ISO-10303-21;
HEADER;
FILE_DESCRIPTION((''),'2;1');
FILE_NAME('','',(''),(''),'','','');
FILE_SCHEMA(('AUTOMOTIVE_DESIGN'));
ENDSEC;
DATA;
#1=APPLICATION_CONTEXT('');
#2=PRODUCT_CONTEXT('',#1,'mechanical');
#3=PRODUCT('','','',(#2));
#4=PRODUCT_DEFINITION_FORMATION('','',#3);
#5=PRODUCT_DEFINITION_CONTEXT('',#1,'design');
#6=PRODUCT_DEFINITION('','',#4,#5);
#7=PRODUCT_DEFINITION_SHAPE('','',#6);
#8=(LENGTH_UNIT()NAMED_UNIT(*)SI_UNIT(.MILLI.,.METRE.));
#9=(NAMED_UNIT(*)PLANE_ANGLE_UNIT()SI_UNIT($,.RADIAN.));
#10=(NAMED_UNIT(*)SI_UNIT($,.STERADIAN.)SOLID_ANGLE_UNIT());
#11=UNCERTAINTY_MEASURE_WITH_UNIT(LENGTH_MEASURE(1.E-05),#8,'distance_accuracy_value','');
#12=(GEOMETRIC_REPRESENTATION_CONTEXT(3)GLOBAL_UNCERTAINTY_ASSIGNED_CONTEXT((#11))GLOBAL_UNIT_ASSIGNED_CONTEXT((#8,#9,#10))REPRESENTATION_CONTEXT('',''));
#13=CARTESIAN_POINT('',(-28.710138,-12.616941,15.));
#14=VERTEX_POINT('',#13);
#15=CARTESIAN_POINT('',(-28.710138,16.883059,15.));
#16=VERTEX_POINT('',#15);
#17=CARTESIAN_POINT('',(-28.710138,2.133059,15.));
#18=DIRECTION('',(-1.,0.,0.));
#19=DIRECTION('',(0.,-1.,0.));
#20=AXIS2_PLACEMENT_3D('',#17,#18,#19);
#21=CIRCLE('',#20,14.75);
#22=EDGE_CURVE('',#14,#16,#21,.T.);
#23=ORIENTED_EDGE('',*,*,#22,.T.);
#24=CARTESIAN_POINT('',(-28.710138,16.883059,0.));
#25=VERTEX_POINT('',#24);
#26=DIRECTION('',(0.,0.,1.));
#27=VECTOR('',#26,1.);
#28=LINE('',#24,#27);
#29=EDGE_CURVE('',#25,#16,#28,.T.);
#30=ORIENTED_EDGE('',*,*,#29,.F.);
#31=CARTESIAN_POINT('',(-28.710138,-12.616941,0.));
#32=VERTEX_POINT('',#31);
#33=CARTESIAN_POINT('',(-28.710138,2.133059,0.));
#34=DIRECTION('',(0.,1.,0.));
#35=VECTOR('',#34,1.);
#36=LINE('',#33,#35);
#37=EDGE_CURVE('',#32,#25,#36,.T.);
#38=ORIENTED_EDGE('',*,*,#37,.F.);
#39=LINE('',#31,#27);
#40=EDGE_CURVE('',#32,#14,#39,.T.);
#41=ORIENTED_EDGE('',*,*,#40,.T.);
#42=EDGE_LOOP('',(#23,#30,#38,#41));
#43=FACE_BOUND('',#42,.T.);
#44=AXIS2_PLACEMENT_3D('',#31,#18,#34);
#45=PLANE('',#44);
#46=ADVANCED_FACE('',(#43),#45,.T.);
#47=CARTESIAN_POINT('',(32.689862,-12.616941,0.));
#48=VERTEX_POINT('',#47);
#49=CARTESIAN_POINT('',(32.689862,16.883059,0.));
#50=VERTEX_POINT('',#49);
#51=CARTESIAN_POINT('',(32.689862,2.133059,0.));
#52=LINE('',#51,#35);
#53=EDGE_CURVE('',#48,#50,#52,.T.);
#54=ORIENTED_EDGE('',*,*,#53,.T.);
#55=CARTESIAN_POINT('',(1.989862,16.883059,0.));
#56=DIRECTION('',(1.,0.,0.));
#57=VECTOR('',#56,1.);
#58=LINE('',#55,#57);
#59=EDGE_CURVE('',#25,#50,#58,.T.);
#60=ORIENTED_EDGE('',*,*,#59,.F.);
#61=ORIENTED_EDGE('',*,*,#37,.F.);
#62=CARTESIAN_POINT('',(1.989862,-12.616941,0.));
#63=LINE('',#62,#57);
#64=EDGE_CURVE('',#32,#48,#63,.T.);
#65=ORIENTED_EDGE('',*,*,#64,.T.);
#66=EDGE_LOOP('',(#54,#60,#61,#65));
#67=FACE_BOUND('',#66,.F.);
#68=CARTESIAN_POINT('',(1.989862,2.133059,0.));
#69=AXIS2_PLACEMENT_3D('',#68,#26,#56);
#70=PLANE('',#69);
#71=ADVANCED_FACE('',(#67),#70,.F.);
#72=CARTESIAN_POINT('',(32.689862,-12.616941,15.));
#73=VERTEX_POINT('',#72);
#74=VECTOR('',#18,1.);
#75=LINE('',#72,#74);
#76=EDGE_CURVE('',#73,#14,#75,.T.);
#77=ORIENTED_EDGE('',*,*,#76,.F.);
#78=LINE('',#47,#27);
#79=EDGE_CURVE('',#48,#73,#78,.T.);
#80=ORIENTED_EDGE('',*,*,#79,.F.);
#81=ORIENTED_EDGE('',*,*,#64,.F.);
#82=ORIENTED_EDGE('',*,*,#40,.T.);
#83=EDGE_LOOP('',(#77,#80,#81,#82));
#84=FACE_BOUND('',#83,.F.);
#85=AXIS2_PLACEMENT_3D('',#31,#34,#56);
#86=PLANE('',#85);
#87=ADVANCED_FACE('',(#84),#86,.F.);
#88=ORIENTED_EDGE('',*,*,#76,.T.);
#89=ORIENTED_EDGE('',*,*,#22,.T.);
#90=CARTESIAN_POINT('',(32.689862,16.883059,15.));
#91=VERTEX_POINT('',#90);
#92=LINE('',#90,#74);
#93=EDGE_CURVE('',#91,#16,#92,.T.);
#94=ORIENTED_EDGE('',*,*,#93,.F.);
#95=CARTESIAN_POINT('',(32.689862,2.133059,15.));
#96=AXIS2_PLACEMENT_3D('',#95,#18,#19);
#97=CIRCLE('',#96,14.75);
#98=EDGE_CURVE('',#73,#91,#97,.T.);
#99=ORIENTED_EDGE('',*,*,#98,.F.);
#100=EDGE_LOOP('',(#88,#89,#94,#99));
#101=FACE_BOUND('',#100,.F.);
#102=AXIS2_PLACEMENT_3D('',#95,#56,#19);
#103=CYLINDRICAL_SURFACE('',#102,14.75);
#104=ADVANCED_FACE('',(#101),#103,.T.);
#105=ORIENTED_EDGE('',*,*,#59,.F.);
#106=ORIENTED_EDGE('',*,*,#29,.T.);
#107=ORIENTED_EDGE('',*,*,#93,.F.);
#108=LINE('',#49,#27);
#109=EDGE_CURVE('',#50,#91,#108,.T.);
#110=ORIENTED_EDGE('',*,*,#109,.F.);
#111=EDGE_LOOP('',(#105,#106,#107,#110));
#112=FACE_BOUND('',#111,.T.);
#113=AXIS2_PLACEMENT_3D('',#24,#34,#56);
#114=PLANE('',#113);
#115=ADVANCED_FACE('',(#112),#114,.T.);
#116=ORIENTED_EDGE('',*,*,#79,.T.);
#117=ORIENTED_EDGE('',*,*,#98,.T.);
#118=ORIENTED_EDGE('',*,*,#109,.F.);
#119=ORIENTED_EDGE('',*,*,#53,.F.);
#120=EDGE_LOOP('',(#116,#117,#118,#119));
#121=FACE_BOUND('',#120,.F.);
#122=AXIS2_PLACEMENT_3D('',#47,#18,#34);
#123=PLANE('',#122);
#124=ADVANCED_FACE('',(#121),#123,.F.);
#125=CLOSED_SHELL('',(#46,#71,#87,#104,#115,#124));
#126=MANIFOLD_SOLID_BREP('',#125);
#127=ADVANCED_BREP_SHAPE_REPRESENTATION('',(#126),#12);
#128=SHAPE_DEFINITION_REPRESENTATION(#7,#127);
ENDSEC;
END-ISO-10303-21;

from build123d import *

# Parameters (mm, degrees)
F0_W     = 61.4
F0_H     = 29.5
F1_DEPTH = 30
F3_DEPTH = 61.4


# Not quite as in the source:
# - a feature names something its author has since deleted; it is built from what else it names


with BuildPart() as f1:
    # F0 (on Top) → F1 (new body)
    with BuildSketch(Plane.XY):
        with Locations((1.9898619503, 2.1330590255)):
            Rectangle(F0_W, F0_H)
    extrude(amount=F1_DEPTH)

    # F2 (on face) → F3 (cut, through all)
    with BuildSketch(Plane.YZ.offset(32.6898619503)):
        with BuildLine():
            Line((9.1330590255, 30), (-4.8669409745, 30))
            Line((-4.8669409745, 30), (-12.6169409745, 30))
            Line((-12.6169409745, 30), (-12.6169409745, 15))
            ThreePointArc((-12.6169409745, 15), (2.1330590255, 29.75), (16.8830590255, 15))
            Line((16.8830590255, 15), (16.8830590255, 30))
            Line((16.8830590255, 30), (9.1330590255, 30))
        make_face()
    extrude(amount=-F3_DEPTH, mode=Mode.SUBTRACT)


solid = f1.part
